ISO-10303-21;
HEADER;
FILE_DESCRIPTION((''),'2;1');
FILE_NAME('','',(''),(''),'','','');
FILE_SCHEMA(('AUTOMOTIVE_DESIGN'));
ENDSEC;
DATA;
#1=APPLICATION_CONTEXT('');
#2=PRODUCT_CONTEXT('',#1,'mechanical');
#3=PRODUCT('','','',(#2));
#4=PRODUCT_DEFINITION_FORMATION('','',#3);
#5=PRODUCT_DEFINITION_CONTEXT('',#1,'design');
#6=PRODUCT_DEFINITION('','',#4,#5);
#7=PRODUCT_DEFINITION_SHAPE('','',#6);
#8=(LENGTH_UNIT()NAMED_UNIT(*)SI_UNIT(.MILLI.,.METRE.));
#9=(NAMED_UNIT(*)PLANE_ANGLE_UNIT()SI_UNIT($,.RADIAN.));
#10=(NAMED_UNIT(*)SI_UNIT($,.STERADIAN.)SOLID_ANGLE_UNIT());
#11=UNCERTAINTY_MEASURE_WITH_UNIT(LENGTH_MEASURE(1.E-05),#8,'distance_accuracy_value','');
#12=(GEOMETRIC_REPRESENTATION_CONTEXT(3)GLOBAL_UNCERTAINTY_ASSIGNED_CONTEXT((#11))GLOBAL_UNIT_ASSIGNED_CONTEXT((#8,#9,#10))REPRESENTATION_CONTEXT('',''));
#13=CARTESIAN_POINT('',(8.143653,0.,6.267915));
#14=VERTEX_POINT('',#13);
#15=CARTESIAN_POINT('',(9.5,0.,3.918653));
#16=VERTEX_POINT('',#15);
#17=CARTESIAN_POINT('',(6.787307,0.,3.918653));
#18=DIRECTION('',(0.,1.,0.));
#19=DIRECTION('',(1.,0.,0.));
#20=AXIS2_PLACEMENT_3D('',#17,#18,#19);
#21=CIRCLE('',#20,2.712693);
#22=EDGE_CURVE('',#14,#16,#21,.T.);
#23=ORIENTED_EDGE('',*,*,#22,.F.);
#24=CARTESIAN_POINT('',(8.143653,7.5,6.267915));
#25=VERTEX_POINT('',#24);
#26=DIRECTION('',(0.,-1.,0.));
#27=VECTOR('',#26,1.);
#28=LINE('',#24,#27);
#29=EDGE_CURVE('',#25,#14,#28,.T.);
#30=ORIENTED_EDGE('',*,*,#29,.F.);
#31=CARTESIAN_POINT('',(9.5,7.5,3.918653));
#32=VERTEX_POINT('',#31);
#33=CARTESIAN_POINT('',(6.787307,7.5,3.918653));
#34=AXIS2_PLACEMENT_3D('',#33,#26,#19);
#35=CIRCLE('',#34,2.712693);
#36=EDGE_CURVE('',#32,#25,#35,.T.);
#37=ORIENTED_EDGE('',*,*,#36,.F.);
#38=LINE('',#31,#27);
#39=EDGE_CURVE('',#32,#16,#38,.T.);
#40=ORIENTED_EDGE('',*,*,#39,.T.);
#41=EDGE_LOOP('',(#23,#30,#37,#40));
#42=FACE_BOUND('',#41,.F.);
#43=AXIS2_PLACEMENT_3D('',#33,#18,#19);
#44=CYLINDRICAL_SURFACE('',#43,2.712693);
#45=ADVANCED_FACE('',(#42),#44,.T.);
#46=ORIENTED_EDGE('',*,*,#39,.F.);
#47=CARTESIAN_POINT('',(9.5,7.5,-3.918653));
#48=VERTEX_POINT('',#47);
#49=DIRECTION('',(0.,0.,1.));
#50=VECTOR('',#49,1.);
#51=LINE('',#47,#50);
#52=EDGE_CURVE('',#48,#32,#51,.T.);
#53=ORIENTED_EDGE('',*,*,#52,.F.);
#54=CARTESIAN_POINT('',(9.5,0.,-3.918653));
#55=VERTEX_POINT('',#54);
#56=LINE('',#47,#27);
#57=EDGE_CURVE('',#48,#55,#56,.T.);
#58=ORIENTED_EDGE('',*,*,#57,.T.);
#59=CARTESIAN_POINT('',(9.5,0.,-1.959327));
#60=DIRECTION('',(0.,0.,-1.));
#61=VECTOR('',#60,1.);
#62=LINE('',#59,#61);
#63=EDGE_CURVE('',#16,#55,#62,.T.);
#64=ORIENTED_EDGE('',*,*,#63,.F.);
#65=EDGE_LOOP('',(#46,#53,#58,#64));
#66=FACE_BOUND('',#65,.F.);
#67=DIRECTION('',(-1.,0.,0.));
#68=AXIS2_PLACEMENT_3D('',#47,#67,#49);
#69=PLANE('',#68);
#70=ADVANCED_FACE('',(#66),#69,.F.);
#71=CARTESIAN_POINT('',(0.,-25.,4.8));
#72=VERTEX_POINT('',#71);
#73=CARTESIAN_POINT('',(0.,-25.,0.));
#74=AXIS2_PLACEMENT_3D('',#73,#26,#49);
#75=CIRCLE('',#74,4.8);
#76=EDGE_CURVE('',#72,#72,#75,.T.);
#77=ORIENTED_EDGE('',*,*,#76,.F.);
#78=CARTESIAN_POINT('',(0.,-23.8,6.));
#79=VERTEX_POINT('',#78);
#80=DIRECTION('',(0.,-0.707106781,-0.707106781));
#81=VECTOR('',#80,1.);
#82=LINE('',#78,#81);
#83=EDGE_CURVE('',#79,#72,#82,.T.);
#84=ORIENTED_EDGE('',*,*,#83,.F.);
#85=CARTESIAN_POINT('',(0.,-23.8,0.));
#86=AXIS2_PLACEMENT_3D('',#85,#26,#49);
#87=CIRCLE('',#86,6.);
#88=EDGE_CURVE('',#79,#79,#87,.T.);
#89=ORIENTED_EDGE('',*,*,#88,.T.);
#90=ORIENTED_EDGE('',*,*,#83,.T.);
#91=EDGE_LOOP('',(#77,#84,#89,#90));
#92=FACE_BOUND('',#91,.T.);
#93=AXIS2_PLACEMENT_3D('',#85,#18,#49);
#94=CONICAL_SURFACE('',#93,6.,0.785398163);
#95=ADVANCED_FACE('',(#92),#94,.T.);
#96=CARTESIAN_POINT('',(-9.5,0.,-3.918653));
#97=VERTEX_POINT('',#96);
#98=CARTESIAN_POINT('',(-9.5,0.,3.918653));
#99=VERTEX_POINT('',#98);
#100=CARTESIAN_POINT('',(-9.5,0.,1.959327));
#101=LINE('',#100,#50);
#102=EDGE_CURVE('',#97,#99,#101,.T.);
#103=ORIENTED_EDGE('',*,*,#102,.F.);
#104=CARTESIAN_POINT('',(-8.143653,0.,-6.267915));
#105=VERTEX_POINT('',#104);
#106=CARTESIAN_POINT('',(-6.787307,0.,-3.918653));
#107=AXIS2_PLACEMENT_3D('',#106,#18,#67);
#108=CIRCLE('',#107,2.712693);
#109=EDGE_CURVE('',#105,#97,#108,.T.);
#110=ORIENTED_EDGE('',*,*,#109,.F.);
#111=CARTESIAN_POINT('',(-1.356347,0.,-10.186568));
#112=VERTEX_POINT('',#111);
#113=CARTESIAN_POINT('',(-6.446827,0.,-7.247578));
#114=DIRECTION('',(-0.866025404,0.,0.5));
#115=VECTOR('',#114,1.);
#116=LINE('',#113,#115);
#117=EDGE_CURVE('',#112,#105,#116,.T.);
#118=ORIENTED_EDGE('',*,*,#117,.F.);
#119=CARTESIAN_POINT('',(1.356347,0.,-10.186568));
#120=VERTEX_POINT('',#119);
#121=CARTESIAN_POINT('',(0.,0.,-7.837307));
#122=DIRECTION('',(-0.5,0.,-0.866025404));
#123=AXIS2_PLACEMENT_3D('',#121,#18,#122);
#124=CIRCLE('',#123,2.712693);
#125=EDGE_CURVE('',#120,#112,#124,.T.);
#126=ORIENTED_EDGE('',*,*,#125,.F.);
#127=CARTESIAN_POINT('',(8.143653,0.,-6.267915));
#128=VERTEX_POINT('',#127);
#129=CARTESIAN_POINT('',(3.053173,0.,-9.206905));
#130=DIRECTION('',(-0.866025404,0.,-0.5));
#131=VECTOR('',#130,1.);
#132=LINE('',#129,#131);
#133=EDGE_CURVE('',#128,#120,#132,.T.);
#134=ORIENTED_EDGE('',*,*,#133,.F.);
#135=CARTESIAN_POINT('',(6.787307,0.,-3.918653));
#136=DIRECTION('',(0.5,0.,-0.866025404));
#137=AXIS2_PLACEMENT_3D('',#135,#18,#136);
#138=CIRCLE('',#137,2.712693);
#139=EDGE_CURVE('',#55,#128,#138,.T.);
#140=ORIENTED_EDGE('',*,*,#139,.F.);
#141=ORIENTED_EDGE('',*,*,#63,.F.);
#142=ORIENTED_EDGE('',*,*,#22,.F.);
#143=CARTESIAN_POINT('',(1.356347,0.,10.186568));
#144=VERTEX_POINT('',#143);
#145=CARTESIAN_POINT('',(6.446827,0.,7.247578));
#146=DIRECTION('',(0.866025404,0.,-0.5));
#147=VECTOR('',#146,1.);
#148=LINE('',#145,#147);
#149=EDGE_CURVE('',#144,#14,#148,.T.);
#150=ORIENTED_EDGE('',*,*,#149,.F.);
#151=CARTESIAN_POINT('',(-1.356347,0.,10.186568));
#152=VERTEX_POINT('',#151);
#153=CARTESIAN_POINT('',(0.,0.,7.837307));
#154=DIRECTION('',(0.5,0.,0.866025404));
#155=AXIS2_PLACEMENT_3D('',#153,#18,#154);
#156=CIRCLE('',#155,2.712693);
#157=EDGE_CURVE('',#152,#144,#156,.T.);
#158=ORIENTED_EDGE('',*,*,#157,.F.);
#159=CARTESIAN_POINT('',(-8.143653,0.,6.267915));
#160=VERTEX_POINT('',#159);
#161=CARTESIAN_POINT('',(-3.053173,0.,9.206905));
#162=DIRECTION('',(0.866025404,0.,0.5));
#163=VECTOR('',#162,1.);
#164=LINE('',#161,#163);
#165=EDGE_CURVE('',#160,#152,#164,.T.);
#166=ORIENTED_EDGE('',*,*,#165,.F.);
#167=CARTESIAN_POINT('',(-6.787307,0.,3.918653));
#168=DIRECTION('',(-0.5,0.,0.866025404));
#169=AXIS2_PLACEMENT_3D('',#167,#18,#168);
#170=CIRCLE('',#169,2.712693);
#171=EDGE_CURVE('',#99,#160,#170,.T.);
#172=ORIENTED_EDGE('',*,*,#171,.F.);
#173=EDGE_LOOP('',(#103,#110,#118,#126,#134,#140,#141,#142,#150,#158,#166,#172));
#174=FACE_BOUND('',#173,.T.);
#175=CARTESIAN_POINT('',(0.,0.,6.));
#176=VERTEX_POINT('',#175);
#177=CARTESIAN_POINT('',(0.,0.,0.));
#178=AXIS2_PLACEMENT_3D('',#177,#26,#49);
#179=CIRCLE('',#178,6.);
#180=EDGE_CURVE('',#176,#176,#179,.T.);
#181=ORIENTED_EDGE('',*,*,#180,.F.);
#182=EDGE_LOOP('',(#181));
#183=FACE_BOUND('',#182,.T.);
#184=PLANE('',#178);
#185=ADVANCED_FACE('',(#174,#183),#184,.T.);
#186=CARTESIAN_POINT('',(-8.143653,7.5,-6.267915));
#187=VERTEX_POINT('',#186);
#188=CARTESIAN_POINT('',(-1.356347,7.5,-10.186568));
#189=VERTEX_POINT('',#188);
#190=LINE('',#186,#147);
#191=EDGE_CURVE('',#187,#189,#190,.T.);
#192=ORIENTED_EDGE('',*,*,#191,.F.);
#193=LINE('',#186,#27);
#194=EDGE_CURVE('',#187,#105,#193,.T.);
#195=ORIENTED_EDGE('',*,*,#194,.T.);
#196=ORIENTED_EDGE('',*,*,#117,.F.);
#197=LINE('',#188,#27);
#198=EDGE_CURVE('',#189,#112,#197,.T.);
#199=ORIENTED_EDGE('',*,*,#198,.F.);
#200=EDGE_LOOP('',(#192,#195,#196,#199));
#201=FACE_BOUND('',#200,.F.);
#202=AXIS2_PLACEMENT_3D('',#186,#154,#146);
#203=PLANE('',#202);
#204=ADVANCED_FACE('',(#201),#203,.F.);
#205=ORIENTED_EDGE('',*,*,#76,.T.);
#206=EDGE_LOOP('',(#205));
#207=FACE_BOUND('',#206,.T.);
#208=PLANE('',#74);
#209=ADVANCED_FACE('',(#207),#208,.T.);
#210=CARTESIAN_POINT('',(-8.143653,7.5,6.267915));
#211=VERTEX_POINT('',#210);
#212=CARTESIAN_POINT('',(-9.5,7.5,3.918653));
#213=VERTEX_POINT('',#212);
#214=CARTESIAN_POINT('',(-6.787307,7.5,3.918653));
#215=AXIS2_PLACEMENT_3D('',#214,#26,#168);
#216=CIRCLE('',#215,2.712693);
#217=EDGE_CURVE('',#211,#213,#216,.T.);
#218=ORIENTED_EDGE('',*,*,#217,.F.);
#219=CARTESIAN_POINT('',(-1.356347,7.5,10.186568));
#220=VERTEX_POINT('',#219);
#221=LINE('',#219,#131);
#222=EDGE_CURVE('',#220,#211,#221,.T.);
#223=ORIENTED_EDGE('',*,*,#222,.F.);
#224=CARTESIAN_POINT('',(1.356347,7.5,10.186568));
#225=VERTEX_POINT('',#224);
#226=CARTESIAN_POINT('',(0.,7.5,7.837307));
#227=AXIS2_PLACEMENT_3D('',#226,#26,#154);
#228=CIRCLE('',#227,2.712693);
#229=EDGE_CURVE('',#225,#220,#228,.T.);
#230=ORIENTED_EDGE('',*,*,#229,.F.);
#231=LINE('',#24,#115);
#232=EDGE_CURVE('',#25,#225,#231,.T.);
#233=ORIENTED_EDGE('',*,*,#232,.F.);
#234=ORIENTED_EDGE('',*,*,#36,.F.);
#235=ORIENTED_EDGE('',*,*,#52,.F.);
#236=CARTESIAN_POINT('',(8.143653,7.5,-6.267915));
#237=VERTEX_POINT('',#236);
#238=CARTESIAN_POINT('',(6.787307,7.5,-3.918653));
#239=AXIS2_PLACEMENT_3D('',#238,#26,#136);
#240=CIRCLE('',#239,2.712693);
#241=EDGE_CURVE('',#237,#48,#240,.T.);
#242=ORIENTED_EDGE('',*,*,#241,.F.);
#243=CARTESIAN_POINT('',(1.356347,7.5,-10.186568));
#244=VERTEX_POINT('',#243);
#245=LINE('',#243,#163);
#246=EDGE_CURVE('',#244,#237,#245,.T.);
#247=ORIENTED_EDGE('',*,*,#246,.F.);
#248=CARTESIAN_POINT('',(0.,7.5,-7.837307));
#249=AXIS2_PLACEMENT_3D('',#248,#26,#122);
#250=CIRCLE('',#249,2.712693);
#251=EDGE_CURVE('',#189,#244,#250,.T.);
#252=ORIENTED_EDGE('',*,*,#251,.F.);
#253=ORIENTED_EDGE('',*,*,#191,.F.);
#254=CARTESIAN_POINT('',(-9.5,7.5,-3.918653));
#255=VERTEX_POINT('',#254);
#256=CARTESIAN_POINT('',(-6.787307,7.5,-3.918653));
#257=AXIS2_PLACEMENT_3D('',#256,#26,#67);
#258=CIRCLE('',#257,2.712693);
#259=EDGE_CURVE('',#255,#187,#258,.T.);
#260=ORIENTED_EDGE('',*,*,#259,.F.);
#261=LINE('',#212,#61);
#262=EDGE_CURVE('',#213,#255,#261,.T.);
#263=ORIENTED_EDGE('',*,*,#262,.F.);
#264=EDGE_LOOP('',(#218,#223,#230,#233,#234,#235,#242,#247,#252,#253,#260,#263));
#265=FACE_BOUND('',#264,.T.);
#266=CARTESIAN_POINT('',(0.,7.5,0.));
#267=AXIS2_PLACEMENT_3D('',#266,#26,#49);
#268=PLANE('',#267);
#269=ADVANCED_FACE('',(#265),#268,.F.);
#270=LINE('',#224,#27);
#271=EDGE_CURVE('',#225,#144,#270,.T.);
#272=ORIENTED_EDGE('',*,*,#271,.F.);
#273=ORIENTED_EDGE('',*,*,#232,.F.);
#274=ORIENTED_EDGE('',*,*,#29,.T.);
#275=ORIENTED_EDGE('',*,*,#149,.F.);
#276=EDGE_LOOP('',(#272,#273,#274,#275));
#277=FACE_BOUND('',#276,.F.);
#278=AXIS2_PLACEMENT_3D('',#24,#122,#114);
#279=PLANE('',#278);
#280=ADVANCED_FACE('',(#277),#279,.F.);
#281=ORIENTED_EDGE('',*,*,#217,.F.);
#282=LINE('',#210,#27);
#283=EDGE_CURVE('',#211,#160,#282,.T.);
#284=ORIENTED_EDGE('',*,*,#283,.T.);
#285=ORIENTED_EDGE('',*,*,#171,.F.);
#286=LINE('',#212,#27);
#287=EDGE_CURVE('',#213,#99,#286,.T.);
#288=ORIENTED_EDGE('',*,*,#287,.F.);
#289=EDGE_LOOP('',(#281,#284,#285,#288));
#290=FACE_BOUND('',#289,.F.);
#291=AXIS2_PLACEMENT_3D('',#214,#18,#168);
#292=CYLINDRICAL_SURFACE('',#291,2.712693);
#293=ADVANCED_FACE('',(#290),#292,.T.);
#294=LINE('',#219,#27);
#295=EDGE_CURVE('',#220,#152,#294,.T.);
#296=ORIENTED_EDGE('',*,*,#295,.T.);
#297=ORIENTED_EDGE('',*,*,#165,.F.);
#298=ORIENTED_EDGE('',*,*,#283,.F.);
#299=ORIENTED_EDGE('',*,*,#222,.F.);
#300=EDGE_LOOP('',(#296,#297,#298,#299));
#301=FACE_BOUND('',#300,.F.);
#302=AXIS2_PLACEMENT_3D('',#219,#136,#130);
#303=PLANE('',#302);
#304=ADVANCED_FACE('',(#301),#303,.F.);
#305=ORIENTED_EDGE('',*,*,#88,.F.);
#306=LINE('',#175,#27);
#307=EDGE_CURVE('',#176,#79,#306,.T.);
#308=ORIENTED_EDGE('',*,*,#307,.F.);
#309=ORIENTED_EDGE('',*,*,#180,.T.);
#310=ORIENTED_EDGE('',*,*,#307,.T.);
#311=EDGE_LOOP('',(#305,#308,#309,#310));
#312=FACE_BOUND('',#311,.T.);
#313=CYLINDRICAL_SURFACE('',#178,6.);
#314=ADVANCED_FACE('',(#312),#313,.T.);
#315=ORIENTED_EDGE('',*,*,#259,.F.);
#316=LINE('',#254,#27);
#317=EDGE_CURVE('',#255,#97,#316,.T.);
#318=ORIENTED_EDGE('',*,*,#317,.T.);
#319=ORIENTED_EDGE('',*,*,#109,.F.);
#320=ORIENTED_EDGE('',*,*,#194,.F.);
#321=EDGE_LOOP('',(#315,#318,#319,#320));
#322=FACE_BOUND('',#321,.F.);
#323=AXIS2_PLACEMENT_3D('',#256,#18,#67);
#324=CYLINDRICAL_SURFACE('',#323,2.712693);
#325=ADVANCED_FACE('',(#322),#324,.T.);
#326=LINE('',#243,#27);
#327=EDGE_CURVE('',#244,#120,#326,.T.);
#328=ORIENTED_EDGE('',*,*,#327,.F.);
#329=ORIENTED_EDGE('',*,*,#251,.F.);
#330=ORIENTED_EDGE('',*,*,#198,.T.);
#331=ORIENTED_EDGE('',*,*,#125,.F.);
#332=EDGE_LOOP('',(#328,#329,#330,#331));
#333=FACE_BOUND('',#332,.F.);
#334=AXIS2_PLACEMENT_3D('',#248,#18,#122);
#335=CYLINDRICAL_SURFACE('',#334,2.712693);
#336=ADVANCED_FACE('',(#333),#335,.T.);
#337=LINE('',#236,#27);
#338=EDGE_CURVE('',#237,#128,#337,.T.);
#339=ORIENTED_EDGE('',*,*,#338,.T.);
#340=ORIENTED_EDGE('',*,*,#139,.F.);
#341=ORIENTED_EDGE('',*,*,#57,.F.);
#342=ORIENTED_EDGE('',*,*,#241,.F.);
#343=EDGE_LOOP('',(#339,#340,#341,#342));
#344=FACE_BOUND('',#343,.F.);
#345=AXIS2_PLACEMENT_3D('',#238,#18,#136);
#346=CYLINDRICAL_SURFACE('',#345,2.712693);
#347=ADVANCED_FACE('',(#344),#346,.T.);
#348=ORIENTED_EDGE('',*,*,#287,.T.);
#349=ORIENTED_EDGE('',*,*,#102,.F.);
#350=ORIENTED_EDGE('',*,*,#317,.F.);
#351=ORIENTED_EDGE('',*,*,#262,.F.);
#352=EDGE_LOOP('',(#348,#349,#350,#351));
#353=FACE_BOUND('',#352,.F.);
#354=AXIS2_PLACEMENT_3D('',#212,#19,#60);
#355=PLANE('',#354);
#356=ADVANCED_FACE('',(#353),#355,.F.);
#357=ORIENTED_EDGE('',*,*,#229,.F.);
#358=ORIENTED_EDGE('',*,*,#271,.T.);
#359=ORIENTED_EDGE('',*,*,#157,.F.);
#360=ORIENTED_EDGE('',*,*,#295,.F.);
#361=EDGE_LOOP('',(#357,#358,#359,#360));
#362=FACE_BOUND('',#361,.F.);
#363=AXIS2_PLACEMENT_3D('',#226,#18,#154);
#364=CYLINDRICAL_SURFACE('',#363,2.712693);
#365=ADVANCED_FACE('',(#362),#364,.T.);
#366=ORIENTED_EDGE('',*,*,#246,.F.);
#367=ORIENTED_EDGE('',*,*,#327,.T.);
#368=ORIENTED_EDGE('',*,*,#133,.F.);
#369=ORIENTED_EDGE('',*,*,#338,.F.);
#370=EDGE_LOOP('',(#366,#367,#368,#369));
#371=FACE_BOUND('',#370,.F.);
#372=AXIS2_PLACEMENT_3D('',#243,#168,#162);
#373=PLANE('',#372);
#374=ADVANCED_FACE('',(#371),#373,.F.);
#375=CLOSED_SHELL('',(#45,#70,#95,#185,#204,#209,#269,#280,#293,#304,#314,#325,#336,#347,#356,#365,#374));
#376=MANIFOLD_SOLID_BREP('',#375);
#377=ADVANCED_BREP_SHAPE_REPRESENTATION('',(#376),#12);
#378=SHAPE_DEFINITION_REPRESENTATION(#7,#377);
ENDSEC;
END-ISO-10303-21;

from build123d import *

# Parameters (mm, degrees)
F2_R     = 15.825
F3_DEPTH = 25


# Not quite as in the source:
# - a feature names something its author has since deleted; it is built from what else it names


with BuildPart() as f1:
    # F0 (on Right) → F1 (revolve)
    with BuildSketch(Plane.YZ):
        Polygon((0, 15.825), (0, 6), (-23.8, 6), (-25, 4.8), (-25, 0), (7.5, 0), (7.5, 15.825), align=None)
    revolve(axis=Axis((0, -8.75, 0), (0, -1, 0)))

    # F2 (on face) → F3 (cut)
    with BuildSketch(Plane(origin=(0, 7.5, 0), x_dir=(-1, 0, 0), z_dir=(0, 1, 0))):
        Circle(F2_R)
        with BuildLine():
            ThreePointArc((1.3563466521, -10.1865680099), (0, -10.55), (-1.3563466521, -10.1865680099))
            Line((-1.3563466521, -10.1865680099), (-8.1436533479, -6.267914662))
            ThreePointArc((-8.1436533479, -6.267914662), (-9.1365680099, -5.275), (-9.5, -3.9186533479))
            Line((-9.5, -3.9186533479), (-9.5, 3.9186533479))
            ThreePointArc((-9.5, 3.9186533479), (-9.1365680099, 5.275), (-8.1436533479, 6.267914662))
            Line((-8.1436533479, 6.267914662), (-1.3563466521, 10.1865680099))
            ThreePointArc((-1.3563466521, 10.1865680099), (0, 10.55), (1.3563466521, 10.1865680099))
            Line((1.3563466521, 10.1865680099), (8.1436533479, 6.267914662))
            ThreePointArc((8.1436533479, 6.267914662), (9.1365680099, 5.275), (9.5, 3.9186533479))
            Line((9.5, 3.9186533479), (9.5, -3.9186533479))
            ThreePointArc((9.5, -3.9186533479), (9.1365680099, -5.275), (8.1436533479, -6.267914662))
            Line((8.1436533479, -6.267914662), (1.3563466521, -10.1865680099))
        make_face(mode=Mode.SUBTRACT)
    extrude(amount=-F3_DEPTH, mode=Mode.SUBTRACT)


solid = f1.part
